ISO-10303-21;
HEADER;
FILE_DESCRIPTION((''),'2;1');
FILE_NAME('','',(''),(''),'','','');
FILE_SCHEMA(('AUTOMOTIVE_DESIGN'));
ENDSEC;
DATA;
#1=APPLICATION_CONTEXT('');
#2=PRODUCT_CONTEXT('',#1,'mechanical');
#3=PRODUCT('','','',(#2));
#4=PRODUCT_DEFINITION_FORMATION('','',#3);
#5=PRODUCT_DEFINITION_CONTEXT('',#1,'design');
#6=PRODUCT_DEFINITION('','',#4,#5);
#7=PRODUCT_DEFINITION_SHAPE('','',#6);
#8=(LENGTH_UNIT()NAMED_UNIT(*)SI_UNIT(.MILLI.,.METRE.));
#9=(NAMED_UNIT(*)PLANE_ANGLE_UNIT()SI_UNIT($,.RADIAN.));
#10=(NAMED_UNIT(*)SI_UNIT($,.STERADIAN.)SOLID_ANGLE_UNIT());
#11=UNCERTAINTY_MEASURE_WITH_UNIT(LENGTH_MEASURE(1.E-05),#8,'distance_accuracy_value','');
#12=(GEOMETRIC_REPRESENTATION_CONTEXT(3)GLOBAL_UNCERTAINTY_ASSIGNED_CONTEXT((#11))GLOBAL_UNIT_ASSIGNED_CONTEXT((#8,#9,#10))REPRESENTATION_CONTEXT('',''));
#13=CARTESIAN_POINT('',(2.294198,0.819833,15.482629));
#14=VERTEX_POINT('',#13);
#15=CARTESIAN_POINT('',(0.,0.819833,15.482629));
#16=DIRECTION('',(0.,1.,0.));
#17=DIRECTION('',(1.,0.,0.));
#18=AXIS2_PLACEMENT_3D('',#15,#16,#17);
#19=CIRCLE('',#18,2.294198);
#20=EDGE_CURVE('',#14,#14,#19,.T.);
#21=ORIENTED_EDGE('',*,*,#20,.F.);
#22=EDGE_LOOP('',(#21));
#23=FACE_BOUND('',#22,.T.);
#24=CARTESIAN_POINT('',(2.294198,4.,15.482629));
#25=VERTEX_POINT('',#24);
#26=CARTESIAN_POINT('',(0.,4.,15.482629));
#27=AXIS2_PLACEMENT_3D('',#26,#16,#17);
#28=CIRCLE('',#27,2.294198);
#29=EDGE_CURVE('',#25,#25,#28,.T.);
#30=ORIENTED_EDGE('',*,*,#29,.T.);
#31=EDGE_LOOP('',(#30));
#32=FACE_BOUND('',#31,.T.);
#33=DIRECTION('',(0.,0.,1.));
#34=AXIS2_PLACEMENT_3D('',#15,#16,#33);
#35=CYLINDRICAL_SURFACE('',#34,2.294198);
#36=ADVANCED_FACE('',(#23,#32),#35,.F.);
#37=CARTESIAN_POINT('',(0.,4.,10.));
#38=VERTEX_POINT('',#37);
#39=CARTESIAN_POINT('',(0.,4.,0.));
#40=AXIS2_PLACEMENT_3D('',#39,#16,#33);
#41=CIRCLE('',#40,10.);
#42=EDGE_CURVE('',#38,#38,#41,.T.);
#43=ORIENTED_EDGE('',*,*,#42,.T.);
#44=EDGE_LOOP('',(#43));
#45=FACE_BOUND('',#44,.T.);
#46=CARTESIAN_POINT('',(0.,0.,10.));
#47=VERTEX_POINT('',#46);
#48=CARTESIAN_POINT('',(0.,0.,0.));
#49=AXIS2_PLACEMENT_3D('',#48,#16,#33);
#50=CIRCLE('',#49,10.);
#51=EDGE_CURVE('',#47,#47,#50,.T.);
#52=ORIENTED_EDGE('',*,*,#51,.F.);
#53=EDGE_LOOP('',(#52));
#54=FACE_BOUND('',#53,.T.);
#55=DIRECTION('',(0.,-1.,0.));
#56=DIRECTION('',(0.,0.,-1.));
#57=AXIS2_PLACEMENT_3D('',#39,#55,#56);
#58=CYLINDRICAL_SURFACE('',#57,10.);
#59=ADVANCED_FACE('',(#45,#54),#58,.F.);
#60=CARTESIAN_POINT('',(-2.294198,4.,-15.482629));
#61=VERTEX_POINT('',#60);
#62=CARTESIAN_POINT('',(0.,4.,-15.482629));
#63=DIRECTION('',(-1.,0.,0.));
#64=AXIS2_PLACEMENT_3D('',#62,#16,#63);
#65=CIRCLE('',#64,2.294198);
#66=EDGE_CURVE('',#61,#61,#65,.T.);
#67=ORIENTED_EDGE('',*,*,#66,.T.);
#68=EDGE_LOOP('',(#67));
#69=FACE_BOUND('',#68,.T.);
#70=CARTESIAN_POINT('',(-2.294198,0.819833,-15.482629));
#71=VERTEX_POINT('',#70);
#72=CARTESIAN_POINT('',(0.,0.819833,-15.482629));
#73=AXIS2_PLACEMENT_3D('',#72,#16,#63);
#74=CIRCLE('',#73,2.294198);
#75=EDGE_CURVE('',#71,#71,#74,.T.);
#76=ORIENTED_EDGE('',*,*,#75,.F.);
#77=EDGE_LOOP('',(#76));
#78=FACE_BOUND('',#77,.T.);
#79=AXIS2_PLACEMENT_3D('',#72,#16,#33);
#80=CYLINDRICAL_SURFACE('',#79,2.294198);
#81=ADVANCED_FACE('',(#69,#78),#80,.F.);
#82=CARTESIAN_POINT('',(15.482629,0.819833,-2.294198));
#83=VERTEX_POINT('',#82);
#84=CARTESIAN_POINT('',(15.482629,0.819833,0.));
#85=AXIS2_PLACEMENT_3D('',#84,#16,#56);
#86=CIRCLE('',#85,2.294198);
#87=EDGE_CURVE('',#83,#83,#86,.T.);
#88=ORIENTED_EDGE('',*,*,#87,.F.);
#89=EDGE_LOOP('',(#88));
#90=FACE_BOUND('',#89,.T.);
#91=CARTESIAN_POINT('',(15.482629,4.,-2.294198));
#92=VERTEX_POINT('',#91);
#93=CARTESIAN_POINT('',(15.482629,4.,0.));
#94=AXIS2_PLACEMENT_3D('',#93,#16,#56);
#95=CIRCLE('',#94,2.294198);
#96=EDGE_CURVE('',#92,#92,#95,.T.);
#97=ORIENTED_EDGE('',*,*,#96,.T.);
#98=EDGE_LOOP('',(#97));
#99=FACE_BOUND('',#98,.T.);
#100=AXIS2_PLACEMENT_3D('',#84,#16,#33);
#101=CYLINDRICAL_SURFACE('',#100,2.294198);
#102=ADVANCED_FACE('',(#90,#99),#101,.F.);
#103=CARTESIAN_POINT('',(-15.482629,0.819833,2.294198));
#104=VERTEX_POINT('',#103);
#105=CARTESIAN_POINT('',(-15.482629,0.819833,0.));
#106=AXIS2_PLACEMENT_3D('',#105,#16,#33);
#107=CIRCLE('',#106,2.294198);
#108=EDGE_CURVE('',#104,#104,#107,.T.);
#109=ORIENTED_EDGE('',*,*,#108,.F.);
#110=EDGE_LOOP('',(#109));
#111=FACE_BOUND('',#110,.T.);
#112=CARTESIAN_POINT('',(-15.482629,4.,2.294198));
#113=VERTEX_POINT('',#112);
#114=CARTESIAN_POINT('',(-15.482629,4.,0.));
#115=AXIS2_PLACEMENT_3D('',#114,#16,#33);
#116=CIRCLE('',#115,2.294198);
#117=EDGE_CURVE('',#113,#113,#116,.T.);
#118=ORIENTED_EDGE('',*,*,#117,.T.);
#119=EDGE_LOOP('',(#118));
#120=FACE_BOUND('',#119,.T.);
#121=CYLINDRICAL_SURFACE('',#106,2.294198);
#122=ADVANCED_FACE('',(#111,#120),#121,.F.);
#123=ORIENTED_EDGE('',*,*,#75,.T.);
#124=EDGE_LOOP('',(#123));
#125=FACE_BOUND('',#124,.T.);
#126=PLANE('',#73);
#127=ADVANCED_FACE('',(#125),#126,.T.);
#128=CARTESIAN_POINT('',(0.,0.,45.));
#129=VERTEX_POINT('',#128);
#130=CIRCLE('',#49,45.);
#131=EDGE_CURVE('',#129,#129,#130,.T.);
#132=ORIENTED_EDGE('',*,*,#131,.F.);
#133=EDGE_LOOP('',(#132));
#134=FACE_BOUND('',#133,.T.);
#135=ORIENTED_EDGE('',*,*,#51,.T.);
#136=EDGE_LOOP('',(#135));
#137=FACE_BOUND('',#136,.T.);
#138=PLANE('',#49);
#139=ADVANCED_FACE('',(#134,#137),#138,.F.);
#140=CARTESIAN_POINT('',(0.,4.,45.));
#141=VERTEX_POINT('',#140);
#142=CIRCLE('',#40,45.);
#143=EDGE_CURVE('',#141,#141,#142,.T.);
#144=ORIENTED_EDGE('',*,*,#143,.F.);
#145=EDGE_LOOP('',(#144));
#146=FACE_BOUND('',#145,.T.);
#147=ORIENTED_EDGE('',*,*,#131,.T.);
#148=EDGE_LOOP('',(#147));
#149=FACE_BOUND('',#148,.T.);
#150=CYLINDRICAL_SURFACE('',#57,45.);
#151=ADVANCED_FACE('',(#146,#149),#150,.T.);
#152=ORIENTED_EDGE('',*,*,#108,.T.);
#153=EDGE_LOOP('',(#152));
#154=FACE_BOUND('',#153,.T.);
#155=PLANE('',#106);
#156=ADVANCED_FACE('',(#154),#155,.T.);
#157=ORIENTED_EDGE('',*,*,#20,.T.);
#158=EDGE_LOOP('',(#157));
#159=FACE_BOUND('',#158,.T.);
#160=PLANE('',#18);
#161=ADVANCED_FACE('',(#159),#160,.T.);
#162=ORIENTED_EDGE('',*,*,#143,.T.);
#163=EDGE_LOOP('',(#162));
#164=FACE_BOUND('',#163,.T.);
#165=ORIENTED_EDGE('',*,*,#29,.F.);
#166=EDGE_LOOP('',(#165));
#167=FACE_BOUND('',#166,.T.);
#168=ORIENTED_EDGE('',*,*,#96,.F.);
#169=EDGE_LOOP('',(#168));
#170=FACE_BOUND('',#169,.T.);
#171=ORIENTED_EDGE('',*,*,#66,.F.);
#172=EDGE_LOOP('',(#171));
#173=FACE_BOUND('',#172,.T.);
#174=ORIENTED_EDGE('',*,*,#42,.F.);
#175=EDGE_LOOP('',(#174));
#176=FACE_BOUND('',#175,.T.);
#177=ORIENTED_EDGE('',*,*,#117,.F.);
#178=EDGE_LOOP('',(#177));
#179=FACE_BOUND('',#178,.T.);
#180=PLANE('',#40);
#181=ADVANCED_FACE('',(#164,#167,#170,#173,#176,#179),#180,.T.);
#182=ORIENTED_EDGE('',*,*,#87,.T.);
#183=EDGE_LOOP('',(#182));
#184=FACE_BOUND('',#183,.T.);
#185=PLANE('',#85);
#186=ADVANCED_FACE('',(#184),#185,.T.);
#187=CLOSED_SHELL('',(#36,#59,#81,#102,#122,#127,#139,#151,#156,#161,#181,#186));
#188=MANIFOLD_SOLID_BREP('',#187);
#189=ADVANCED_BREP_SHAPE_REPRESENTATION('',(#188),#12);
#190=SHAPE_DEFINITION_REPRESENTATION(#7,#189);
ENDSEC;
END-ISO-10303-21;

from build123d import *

# Parameters (mm, degrees)
SKETCH1_R           = 45
BOSS_EXTRUDE1_DEPTH = 4
SKETCH2_R           = 10
CUT_EXTRUDE1_DEPTH  = 64.765194268
SKETCH3_R           = 2.294197772
CUT_EXTRUDE2_DEPTH  = 3.180167202
CIRPATTERN1_COUNT   = 4


with BuildPart() as part:
    # Sketch1 → Boss-Extrude1 (new body)
    with BuildSketch(Plane(origin=(0, 0, 0), x_dir=(1, 0, 0), z_dir=(0, 1, 0))):
        Circle(SKETCH1_R)
    extrude(amount=BOSS_EXTRUDE1_DEPTH)

    # Sketch2 → Cut-Extrude1 (cut, through all)
    with BuildSketch(Plane(origin=(0, 0, 0), x_dir=(1, 0, 0), z_dir=(0, 1, 0))):
        Circle(SKETCH2_R)
    extrude(amount=CUT_EXTRUDE1_DEPTH, mode=Mode.SUBTRACT)

    # Sketch3 → Cut-Extrude2 (cut)
    with BuildSketch(Plane(origin=(0, 4, 0), x_dir=(1, 0, 0), z_dir=(0, 1, 0))):
        with Locations((-15.482628795, 0)):
            Circle(SKETCH3_R)
    cut_extrude2 = extrude(amount=-CUT_EXTRUDE2_DEPTH, mode=Mode.SUBTRACT)

    # CirPattern1: Cut-Extrude2 ×4 about axis
    cirpattern1_axis = Axis((0, 0, 0), (0, 1, 0))
    for i in range(1, CIRPATTERN1_COUNT):
        add(cut_extrude2.rotate(cirpattern1_axis, i * 360 / CIRPATTERN1_COUNT), mode=Mode.SUBTRACT)


solid = part.part
